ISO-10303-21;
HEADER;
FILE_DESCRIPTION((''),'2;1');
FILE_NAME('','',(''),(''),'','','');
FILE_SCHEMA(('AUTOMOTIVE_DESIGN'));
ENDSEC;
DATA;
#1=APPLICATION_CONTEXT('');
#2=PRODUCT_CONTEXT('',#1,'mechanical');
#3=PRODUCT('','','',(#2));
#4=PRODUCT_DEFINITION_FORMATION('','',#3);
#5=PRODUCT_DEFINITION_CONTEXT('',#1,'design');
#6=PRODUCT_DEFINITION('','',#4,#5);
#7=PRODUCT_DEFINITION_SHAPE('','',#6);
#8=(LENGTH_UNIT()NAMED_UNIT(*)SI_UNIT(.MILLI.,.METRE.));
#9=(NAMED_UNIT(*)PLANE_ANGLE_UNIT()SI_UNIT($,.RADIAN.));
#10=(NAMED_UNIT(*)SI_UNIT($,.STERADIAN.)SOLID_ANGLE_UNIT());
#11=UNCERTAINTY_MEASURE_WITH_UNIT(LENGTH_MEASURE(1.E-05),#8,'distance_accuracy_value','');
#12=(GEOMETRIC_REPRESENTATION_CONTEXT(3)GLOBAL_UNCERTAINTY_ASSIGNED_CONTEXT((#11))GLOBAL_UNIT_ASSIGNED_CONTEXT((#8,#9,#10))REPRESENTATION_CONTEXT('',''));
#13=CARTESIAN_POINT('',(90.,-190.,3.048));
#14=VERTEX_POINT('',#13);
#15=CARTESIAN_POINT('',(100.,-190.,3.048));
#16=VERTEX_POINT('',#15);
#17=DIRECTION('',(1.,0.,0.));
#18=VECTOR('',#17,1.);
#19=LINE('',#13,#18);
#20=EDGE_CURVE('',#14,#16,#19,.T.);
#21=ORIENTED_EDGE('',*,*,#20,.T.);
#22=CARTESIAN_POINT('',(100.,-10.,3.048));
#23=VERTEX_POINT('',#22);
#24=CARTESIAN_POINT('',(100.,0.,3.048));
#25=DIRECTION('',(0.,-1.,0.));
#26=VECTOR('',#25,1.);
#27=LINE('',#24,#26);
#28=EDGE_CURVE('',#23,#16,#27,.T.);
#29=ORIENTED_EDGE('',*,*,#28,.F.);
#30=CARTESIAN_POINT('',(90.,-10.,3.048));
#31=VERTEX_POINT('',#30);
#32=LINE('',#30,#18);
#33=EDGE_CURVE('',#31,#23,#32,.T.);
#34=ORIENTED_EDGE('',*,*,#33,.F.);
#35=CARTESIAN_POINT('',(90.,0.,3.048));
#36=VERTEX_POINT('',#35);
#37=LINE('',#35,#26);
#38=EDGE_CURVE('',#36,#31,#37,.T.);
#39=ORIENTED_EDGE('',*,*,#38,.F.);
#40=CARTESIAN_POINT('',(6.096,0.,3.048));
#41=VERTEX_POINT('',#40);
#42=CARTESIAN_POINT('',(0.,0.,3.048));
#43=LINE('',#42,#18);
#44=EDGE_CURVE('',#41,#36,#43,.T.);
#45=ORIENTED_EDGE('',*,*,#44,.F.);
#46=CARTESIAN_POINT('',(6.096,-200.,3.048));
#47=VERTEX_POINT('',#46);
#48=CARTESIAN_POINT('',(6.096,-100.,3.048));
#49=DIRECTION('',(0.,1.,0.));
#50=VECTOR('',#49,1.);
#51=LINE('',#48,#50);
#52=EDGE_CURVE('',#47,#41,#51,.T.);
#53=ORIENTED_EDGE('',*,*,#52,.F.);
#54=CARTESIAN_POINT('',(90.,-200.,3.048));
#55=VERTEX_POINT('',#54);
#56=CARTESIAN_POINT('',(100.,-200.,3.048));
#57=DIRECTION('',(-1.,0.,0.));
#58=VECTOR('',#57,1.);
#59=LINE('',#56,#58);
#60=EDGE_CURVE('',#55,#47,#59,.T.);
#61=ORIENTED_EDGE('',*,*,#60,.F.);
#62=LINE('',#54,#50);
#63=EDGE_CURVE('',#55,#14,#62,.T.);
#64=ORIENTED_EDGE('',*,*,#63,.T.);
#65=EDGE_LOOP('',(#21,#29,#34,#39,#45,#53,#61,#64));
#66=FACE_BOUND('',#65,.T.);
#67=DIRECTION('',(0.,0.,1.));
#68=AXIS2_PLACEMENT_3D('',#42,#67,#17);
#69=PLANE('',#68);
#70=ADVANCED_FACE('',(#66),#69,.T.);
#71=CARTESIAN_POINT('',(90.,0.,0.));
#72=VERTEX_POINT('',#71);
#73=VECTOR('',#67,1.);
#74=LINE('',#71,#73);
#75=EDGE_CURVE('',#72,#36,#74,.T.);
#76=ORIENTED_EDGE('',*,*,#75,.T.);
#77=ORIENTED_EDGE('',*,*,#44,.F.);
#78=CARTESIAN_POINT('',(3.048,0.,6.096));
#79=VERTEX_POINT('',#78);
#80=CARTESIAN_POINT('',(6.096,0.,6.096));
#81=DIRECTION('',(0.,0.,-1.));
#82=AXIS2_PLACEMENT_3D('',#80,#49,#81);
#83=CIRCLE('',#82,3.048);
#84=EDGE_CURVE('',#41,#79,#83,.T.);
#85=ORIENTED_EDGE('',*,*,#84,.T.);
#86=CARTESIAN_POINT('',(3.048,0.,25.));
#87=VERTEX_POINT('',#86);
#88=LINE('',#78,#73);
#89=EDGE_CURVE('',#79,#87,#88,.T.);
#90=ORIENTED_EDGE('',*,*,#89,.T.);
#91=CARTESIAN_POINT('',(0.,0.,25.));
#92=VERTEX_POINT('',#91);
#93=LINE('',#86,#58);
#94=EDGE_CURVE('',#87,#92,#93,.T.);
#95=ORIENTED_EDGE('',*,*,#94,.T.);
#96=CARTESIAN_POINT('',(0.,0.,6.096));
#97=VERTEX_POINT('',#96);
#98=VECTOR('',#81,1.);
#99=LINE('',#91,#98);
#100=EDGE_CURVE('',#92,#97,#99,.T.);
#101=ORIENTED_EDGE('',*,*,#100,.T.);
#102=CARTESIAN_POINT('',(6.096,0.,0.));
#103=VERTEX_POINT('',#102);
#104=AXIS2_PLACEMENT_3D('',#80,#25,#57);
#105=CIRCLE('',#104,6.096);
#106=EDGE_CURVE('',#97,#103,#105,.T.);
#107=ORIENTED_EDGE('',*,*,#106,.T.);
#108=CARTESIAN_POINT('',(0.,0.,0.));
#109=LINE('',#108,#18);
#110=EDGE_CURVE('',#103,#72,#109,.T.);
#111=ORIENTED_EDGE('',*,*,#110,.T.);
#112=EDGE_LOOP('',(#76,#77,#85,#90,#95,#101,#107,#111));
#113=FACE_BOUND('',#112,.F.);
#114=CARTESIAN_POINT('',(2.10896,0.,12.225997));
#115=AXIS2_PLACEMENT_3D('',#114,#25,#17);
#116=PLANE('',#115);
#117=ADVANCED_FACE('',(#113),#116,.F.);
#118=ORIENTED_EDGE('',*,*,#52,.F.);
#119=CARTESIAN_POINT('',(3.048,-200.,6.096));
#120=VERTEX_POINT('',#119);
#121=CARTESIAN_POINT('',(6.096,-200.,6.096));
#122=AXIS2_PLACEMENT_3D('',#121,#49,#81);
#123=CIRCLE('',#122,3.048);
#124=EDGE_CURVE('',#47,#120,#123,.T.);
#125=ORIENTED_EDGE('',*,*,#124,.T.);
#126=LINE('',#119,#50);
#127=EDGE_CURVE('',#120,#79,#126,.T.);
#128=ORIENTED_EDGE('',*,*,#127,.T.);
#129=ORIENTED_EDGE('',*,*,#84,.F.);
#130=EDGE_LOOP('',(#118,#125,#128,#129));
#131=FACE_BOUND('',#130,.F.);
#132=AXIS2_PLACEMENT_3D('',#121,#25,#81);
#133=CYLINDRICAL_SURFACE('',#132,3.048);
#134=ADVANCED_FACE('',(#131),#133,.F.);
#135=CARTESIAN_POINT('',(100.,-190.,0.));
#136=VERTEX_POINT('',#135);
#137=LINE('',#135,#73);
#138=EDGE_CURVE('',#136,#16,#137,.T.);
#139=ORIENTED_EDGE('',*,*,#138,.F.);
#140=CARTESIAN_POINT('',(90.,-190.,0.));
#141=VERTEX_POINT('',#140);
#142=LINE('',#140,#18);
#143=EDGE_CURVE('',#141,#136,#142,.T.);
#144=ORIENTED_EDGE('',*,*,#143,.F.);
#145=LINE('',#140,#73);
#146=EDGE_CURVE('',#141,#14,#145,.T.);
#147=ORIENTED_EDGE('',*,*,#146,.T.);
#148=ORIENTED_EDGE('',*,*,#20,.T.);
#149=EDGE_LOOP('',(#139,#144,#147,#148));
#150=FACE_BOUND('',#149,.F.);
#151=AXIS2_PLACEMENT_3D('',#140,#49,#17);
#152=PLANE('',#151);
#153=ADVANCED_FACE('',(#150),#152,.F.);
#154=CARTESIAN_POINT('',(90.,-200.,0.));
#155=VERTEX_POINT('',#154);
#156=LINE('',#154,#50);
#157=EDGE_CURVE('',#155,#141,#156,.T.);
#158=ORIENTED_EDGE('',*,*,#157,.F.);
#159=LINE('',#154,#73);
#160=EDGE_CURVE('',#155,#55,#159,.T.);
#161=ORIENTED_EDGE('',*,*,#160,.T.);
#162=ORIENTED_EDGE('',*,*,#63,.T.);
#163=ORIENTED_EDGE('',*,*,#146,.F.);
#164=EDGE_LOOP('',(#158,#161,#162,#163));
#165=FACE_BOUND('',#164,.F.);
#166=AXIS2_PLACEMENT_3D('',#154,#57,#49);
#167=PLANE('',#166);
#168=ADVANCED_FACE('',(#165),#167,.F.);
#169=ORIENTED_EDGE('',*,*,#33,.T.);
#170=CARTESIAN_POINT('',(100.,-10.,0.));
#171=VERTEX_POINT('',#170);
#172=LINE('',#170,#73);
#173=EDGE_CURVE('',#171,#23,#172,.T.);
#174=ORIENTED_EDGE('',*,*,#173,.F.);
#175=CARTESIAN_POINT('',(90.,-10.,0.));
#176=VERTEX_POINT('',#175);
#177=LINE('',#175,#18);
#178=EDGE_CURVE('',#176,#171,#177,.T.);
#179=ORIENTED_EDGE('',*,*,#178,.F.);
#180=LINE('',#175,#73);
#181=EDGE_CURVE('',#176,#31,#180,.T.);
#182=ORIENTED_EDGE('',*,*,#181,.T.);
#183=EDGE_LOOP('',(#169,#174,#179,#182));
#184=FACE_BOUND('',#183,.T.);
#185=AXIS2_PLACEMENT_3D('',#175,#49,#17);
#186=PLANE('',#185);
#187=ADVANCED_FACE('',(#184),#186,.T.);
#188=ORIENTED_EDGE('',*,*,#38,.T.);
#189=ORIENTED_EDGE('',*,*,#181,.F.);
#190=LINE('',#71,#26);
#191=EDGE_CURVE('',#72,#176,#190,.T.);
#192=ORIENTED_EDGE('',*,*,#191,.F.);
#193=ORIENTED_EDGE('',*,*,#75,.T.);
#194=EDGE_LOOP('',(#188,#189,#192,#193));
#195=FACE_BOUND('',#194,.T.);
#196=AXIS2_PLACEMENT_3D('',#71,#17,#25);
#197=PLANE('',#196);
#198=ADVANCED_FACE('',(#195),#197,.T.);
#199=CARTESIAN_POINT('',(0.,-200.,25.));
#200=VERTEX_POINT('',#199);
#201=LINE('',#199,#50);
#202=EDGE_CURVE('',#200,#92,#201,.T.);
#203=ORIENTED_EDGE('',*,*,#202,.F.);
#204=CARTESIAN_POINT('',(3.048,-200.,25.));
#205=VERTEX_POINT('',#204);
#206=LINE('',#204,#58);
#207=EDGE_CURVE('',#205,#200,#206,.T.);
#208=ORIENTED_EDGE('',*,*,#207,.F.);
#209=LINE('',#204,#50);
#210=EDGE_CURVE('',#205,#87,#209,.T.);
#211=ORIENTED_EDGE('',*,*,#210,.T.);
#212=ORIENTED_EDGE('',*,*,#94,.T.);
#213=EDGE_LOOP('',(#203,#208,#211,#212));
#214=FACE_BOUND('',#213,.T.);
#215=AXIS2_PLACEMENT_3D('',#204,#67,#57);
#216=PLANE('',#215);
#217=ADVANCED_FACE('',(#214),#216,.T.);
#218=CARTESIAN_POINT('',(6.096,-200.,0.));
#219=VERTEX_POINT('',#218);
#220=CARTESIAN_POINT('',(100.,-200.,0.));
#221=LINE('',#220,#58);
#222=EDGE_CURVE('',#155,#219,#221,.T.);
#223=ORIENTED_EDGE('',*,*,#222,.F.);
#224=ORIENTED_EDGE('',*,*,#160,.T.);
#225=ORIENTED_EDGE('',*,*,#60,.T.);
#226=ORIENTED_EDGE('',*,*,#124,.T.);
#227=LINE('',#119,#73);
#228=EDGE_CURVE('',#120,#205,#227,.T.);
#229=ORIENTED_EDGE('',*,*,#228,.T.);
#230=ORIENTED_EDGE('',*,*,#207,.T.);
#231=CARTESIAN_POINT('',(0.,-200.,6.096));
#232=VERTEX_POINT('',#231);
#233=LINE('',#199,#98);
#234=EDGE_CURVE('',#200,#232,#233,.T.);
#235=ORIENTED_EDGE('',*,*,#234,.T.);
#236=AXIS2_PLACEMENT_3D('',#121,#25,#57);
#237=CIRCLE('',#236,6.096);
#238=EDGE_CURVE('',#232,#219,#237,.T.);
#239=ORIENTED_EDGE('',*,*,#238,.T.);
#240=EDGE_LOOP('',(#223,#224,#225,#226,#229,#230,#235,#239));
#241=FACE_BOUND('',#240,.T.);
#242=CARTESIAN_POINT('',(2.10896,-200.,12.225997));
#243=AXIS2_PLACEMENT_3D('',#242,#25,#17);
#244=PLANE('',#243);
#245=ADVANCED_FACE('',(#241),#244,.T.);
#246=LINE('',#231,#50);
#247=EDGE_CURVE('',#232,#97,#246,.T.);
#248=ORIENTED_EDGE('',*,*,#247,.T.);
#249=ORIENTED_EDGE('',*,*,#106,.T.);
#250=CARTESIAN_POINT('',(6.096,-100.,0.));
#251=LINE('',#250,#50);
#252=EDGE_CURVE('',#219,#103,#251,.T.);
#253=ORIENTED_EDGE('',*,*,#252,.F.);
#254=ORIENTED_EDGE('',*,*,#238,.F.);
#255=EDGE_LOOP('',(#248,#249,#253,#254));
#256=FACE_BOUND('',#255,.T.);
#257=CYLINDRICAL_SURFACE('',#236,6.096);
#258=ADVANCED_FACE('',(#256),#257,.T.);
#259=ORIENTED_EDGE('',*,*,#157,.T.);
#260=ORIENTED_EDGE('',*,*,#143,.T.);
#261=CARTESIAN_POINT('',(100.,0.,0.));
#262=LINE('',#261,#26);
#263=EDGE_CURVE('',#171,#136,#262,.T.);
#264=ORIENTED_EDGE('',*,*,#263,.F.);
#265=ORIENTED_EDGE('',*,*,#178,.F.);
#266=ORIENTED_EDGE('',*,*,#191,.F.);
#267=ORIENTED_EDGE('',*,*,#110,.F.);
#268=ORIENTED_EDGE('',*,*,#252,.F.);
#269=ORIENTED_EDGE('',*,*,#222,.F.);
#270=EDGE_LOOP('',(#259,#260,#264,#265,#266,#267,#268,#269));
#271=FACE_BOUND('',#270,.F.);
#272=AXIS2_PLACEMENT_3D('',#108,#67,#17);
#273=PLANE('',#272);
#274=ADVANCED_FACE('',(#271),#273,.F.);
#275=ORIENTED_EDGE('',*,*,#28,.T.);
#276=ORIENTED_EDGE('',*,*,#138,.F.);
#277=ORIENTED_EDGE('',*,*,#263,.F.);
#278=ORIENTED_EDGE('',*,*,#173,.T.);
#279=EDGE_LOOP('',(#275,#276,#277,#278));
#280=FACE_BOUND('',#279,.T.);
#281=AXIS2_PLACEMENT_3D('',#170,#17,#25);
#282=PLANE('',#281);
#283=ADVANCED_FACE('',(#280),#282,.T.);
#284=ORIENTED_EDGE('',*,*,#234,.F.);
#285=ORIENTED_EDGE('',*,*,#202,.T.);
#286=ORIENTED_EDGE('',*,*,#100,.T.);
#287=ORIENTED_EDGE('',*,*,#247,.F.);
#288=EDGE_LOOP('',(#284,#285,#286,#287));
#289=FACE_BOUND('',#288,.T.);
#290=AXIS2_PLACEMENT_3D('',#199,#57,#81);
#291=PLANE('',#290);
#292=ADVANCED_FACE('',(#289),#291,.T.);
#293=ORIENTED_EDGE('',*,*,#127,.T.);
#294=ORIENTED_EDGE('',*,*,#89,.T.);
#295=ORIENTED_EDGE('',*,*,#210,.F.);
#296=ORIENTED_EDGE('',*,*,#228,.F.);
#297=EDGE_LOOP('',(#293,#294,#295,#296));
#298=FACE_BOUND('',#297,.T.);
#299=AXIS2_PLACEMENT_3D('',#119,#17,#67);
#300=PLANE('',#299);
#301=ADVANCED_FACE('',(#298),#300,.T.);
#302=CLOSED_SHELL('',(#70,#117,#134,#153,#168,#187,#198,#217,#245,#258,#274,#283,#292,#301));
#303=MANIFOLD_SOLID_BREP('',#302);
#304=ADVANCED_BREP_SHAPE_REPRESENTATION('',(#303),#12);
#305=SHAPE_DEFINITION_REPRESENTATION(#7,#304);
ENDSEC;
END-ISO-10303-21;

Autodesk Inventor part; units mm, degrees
ref_plane "YZ Plane" through (0, 0, 0) normal (1, 0, 0) x (0, 1, 0)
ref_plane "XZ Plane" through (0, 0, 0) normal (0, 1, 0) x (-1, 0, 0)
ref_plane "XY Plane" through (0, 0, 0) normal (0, 0, 1) x (1, 0, 0)
sketch "Sketch1" plane through (0, 0, 0) normal (0, 0, 1) x (1, 0, 0)
  line L0 (0, 0) -> (100, 0)
  line L1 (100, 0) -> (100, -200)
  line L2 (100, -200) -> (0, -200)
  line L3 (0, -200) -> (0, 0)
  line L4 (100, 0) -> (90, 0)
  line L5 (90, 0) -> (90, -10)
  line L6 (90, -10) -> (100, -10)
  line L7 (100, -10) -> (100, 0)
  line L8 (100, -200) -> (90, -200)
  line L9 (90, -200) -> (90, -190)
  line L10 (90, -190) -> (100, -190)
  line L11 (100, -190) -> (100, -200)
  dimension "d0" = 100
  dimension "d1" = 200
  dimension "d2" = 10
  dimension "d3" = 10
extrude "Plate1" add sketch "Sketch1" along normal blind 3.048 contours L0 L5 L6 L1 L10 L9 L2 L3
sketch "Sketch2" plane through (0, 0, 3.048) normal (0, 0, 1) x (1, 0, 0)
  line L0 (13.9517, -33.0603) -> (49.292, -33.0603) construction
  line L1 (49.292, -33.0603) -> (49.292, -43.4735) construction
  line L2 (49.292, -43.4735) -> (13.9517, -43.4735) construction
  line L3 (13.9517, -43.4735) -> (13.9517, -33.0603) construction
  point P0 (0, 0)
mark "Mark1"
sketch "Sketch3" plane through (3.048, -200, 0) normal (-1, 0, 0) x (0, -1, 0)
  line L0 (-200, 0) -> (0, 0)
  line L1 (0, 0) -> (0, 25)
  line L2 (0, 25) -> (-200, 25)
  line L3 (-200, 25) -> (-200, 0)
edge flange "Flange1" height 25 angle 90 thickness 3.048 bend radius 3.048 thickness toward (-1, 0, 0) relief tear relief width 3.048 relief depth 1.524 edges at (0, -100, 3.048) wall of the first edge with corners at (3.048, 0, 0) (3.048, -200, 0) (3.048, -200, 25) (3.048, 0, 25)
bend "Bend1"
corner "Corner1"
equation "\"d4\" = Thickness"
equation "\"d5\" = BendReliefWidth"
equation "\"d6\" = BendReliefDepth"
equation "\"d7\" = MinimumRemnant"
equation "\"d8\" = TransitionRadius"
equation "\"d11\" = BendRadius"
equation "\"d12\" = CornerReliefSize"
equation "\"d13\" = GapSize"
equation "\"d14\" = JacobiRadiusSize"
equation "\"BendRadius\" = Thickness"
equation "\"BendReliefWidth\" = Thickness"
equation "\"BendReliefDepth\" = 0.5 * Thickness"
equation "\"CornerReliefSize\" = 4 * Thickness"
equation "\"MinimumRemnant\" = 2 * Thickness"
equation "\"TransitionRadius\" = BendRadius"
equation "\"JacobiRadiusSize\" = BendRadius"
equation "\"GapSize\" = Thickness"
equation "\"Thickness\" = 3.048"
